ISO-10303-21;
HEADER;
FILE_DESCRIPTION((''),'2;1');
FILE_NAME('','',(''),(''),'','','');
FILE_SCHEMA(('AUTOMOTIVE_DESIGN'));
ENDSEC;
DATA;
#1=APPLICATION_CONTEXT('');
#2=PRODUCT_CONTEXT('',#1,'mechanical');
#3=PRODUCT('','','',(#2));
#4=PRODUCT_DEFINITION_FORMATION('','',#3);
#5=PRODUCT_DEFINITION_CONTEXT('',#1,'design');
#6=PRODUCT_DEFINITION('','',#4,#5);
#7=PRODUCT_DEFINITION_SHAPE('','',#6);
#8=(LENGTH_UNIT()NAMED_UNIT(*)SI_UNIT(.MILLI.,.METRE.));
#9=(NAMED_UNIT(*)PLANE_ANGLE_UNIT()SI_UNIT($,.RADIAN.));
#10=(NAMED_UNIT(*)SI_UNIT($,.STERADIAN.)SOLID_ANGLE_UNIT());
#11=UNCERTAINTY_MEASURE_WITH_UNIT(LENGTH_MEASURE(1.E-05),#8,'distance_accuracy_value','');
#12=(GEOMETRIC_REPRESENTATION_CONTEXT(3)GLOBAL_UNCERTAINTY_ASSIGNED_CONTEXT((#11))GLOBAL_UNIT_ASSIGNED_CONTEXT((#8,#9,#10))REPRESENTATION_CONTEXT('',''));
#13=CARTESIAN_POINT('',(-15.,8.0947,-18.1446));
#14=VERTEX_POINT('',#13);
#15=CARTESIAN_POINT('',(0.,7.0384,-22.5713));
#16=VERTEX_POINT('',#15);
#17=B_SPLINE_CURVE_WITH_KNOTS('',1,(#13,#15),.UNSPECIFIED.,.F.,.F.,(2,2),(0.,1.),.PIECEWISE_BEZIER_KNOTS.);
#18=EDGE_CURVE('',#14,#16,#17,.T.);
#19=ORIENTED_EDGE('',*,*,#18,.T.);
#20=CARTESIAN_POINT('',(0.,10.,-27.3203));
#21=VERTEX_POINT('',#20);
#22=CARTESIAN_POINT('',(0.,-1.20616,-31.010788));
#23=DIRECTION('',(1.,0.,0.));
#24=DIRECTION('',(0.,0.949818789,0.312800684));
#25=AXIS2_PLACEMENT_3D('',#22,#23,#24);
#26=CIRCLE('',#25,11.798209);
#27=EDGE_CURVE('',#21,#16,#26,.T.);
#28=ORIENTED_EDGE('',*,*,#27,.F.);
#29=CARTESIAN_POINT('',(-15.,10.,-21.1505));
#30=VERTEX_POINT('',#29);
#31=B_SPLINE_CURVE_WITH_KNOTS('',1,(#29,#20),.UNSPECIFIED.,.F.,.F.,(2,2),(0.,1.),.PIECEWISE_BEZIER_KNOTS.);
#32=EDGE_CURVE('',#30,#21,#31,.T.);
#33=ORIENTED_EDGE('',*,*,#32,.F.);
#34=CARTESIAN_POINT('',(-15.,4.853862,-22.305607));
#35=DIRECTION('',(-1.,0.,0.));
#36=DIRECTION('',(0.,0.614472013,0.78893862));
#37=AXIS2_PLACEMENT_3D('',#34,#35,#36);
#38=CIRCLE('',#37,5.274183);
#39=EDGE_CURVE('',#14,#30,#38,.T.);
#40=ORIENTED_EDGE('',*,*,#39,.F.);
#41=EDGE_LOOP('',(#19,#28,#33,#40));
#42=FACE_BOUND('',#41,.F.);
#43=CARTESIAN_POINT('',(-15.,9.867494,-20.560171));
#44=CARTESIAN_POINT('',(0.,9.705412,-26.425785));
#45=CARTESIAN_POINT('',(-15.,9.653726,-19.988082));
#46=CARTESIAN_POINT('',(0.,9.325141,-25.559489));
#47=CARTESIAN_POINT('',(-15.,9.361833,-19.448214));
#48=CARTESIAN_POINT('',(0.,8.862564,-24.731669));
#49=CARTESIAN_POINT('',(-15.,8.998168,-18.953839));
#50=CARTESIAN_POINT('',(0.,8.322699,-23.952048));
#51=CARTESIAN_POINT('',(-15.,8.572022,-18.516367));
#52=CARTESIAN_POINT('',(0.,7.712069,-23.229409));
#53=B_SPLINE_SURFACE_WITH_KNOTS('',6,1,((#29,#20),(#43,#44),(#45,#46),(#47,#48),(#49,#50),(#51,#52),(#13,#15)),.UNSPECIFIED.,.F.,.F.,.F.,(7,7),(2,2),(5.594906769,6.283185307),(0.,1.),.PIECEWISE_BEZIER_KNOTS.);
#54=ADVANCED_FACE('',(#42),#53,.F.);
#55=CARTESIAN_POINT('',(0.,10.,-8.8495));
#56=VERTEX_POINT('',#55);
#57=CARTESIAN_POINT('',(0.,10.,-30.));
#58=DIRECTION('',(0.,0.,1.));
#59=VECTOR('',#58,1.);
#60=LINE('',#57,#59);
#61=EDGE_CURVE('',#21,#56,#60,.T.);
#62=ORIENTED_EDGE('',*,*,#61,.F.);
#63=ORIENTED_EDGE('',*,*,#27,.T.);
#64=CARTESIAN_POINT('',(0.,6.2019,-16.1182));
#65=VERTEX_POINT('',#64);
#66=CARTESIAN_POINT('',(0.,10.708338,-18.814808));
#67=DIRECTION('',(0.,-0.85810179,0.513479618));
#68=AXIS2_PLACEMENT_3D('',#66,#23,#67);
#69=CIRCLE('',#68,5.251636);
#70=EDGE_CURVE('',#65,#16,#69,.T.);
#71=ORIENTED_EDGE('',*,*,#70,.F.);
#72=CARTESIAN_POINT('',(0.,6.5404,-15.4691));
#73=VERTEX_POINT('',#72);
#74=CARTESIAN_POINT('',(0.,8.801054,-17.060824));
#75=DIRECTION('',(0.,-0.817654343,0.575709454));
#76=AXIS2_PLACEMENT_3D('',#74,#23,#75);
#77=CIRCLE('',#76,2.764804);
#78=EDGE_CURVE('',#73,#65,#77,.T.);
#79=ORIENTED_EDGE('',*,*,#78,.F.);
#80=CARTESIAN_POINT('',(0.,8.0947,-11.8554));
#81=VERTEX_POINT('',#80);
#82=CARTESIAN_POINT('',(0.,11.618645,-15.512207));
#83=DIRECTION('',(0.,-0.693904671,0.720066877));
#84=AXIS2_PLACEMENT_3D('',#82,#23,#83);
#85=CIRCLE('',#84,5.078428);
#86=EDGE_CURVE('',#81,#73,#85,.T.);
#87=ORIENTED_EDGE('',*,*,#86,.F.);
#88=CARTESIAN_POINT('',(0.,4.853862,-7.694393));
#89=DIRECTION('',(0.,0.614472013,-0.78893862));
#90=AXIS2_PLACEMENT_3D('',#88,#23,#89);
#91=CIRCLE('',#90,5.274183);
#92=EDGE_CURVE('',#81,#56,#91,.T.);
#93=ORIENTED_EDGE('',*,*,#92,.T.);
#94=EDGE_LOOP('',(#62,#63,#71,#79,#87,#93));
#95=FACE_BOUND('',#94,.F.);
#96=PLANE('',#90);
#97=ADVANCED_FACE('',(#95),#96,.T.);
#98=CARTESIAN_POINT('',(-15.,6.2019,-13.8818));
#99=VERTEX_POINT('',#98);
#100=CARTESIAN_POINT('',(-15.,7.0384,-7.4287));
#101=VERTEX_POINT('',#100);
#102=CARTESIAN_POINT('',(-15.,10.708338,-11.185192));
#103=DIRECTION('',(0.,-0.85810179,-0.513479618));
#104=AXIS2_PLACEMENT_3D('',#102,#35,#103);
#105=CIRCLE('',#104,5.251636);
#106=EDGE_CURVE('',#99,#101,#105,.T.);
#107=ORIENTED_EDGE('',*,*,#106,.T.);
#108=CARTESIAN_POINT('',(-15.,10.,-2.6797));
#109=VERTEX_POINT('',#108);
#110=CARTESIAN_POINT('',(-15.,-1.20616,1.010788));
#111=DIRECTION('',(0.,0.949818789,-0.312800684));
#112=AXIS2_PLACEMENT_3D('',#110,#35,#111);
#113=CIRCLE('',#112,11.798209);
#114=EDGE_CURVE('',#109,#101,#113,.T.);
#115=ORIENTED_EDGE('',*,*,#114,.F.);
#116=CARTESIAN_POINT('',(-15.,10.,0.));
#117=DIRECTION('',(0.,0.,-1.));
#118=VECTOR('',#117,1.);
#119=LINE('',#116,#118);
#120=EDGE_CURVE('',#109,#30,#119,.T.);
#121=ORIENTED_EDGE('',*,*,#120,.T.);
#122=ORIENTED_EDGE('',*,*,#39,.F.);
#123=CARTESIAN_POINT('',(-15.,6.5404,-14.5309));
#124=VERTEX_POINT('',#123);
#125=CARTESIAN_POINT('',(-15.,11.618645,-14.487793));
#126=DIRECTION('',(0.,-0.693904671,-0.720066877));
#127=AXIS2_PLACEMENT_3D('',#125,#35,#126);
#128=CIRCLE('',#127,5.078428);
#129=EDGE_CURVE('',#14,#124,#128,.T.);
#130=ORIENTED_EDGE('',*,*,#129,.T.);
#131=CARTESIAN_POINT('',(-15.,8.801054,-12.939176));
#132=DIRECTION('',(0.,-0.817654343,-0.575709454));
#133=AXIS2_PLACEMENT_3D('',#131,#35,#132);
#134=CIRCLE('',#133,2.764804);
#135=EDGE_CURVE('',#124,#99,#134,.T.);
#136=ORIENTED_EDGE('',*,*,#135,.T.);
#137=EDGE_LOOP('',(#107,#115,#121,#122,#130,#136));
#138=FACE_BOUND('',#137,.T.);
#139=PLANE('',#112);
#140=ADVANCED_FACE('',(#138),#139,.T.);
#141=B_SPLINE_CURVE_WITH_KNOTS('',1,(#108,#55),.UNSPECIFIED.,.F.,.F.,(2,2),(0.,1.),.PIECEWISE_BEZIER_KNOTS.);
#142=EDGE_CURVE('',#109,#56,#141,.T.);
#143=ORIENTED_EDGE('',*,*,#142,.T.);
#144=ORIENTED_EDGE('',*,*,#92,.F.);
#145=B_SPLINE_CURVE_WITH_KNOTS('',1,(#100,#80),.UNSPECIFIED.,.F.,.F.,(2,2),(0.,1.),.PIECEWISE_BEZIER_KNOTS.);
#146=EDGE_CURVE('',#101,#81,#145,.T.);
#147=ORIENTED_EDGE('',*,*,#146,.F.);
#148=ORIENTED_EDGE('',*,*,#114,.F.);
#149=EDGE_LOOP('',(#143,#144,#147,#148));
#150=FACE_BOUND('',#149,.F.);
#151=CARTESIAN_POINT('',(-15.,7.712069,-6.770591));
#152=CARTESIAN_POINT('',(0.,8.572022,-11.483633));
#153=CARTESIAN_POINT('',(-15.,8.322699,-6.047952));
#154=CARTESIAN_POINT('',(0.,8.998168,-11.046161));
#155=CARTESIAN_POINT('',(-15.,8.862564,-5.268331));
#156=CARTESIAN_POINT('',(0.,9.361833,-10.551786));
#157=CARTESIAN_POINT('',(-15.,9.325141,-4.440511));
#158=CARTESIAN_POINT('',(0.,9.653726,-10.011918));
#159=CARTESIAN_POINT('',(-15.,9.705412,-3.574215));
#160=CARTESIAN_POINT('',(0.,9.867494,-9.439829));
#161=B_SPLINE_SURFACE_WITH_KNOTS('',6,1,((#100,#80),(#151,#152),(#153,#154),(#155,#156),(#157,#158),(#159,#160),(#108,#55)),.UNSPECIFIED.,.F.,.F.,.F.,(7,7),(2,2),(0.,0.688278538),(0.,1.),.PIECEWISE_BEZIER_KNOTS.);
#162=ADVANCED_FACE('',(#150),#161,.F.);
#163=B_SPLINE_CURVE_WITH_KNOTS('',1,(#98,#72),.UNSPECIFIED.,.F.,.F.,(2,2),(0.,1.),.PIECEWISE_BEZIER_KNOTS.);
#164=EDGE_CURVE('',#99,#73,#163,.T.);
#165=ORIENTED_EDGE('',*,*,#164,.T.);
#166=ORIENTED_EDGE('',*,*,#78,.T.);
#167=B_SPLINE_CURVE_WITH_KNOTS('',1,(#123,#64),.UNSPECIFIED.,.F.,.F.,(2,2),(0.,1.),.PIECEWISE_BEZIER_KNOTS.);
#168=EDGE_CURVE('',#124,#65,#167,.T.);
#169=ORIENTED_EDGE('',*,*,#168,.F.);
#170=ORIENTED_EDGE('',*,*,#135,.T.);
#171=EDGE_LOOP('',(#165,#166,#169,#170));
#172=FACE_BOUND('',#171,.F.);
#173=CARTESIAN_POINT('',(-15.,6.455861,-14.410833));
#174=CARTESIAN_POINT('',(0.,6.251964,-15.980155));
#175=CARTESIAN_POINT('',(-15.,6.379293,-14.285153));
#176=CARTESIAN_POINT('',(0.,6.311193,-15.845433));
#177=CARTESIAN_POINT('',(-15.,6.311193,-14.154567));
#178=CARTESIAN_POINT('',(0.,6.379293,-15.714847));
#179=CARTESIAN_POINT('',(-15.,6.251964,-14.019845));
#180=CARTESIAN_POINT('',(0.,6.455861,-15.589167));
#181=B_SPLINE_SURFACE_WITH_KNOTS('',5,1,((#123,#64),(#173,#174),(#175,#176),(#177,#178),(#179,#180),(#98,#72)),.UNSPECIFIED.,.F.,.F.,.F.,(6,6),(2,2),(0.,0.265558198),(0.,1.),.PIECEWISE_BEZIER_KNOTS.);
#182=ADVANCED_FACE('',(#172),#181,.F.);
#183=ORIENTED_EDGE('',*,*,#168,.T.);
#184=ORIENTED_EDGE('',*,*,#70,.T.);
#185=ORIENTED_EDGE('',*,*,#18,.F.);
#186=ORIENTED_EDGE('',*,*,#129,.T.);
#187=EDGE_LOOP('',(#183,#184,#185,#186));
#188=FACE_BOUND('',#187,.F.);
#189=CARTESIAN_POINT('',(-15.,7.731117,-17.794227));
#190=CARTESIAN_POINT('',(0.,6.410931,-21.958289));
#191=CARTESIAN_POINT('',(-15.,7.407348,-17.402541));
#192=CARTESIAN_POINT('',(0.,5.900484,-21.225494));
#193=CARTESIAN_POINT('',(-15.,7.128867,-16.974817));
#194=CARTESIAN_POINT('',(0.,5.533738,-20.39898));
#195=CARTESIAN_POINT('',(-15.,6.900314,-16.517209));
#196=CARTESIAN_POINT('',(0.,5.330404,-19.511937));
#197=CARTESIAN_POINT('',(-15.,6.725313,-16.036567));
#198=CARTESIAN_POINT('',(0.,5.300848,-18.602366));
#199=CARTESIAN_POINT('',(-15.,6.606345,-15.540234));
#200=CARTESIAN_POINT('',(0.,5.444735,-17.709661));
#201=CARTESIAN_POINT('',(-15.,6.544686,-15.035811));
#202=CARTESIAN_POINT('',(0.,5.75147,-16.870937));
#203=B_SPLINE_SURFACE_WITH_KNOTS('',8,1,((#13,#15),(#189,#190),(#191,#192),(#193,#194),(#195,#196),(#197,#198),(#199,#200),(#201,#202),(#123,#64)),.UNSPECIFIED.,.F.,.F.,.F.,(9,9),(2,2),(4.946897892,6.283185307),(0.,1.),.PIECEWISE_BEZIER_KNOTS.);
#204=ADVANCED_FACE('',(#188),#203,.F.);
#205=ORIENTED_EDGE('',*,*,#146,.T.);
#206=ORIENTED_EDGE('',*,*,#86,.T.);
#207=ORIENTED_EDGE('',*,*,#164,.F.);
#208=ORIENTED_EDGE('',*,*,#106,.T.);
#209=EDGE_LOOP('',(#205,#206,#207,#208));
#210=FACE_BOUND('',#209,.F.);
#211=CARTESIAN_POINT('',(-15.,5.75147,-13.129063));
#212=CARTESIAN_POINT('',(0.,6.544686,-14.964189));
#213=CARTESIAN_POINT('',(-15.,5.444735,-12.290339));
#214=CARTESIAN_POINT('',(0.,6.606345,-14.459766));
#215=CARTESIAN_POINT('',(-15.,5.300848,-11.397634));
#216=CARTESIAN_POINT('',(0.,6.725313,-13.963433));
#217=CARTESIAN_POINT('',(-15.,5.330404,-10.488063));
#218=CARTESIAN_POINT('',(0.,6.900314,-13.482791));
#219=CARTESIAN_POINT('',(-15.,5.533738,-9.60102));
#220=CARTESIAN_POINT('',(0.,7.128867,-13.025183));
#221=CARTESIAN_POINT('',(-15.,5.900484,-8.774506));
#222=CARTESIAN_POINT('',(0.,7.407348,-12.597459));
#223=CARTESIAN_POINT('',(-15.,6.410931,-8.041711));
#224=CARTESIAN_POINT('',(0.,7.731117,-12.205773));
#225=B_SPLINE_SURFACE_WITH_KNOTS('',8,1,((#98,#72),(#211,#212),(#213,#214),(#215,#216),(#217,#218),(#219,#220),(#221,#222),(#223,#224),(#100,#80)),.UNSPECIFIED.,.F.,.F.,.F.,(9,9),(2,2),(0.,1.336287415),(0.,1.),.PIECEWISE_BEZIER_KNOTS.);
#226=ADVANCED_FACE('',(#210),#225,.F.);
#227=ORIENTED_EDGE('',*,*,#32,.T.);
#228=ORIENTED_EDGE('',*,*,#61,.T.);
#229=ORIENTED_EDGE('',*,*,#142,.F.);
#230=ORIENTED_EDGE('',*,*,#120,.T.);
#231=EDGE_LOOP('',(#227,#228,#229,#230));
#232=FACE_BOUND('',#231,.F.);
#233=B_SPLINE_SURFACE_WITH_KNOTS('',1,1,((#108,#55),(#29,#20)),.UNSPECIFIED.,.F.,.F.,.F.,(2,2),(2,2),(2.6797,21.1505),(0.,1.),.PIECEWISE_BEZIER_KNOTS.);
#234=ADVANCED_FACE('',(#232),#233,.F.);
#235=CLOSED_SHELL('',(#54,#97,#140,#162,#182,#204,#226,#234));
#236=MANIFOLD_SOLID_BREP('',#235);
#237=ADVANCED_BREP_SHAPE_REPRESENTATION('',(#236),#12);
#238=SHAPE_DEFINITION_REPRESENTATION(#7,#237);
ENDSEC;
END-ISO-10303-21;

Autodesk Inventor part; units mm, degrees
ref_plane "YZ Plane" through (0, 0, 0) normal (1, 0, 0) x (0, 1, 0)
ref_plane "XZ Plane" through (0, 0, 0) normal (0, 1, 0) x (-1, 0, 0)
ref_plane "XY Plane" through (0, 0, 0) normal (0, 0, 1) x (1, 0, 0)
sketch "Sketch1" plane through (0, 0, 0) normal (0, 1, 0) x (-1, 0, 0)
  line L0 (0, 0) -> (15, 0)
  line L1 (15, 0) -> (15, -30)
  line L2 (15, -30) -> (0, -30)
  line L3 (0, -30) -> (0, 0)
  dimension "d0" = 15
  dimension "d1" = 30
extrude "Extrusion1" add sketch "Sketch1" along normal blind 10
sketch "Sketch5" plane through (0, 0, 0) normal (1, 0, 0) x (0, 0, -1)
  line L0 (30, 10) -> (0, 10)
  arc A0 (11.8554, 8.0947) -> (8.8495, 10) centre (7.6947, 4.8542) ccw
  arc A1 (11.8554, 8.0947) -> (15.4691, 6.5404) centre (15.5119, 11.6182) ccw
  arc A2 (15.4691, 6.5404) -> (16.1182, 6.2019) centre (17.0614, 8.802) ccw
  arc A3 (16.1182, 6.2019) -> (22.5713, 7.0384) centre (18.8148, 10.7083) ccw
  arc A4 (27.3203, 10) -> (22.5713, 7.0384) centre (31.0109, -1.2064) ccw
  line L1 (27.3203, 10) -> (8.8495, 10)
  point P0 (0, 0)
  point P1 (0, 0)
  dimension "d14" = 2.6797
  dimension "d15" = 8.8495
sketch "Sketch6" plane through (-15, 0, -30) normal (-1, 0, 0) x (0, 0, 1)
  line L0 (30, 10) -> (0, 10)
  arc A0 (11.8554, 8.0947) -> (8.8495, 10) centre (7.6947, 4.8542) ccw
  arc A1 (11.8554, 8.0947) -> (15.4691, 6.5404) centre (15.5119, 11.6182) ccw
  arc A2 (15.4691, 6.5404) -> (16.1182, 6.2019) centre (17.0614, 8.802) ccw
  arc A3 (16.1182, 6.2019) -> (22.5713, 7.0384) centre (18.8148, 10.7083) ccw
  arc A4 (27.3203, 10) -> (22.5713, 7.0384) centre (31.0109, -1.2064) ccw
  line L1 (27.3203, 10) -> (8.8495, 10)
  point P0 (30, 0)
  point P1 (0, 0)
  point P2 (0, 0)
  dimension "d16" = 2.6797
  dimension "d17" = 8.8495
loft "Loft2" cut profiles "Sketch6", "Sketch5" keep common part
properties part number "crazy_test_2_fill"
